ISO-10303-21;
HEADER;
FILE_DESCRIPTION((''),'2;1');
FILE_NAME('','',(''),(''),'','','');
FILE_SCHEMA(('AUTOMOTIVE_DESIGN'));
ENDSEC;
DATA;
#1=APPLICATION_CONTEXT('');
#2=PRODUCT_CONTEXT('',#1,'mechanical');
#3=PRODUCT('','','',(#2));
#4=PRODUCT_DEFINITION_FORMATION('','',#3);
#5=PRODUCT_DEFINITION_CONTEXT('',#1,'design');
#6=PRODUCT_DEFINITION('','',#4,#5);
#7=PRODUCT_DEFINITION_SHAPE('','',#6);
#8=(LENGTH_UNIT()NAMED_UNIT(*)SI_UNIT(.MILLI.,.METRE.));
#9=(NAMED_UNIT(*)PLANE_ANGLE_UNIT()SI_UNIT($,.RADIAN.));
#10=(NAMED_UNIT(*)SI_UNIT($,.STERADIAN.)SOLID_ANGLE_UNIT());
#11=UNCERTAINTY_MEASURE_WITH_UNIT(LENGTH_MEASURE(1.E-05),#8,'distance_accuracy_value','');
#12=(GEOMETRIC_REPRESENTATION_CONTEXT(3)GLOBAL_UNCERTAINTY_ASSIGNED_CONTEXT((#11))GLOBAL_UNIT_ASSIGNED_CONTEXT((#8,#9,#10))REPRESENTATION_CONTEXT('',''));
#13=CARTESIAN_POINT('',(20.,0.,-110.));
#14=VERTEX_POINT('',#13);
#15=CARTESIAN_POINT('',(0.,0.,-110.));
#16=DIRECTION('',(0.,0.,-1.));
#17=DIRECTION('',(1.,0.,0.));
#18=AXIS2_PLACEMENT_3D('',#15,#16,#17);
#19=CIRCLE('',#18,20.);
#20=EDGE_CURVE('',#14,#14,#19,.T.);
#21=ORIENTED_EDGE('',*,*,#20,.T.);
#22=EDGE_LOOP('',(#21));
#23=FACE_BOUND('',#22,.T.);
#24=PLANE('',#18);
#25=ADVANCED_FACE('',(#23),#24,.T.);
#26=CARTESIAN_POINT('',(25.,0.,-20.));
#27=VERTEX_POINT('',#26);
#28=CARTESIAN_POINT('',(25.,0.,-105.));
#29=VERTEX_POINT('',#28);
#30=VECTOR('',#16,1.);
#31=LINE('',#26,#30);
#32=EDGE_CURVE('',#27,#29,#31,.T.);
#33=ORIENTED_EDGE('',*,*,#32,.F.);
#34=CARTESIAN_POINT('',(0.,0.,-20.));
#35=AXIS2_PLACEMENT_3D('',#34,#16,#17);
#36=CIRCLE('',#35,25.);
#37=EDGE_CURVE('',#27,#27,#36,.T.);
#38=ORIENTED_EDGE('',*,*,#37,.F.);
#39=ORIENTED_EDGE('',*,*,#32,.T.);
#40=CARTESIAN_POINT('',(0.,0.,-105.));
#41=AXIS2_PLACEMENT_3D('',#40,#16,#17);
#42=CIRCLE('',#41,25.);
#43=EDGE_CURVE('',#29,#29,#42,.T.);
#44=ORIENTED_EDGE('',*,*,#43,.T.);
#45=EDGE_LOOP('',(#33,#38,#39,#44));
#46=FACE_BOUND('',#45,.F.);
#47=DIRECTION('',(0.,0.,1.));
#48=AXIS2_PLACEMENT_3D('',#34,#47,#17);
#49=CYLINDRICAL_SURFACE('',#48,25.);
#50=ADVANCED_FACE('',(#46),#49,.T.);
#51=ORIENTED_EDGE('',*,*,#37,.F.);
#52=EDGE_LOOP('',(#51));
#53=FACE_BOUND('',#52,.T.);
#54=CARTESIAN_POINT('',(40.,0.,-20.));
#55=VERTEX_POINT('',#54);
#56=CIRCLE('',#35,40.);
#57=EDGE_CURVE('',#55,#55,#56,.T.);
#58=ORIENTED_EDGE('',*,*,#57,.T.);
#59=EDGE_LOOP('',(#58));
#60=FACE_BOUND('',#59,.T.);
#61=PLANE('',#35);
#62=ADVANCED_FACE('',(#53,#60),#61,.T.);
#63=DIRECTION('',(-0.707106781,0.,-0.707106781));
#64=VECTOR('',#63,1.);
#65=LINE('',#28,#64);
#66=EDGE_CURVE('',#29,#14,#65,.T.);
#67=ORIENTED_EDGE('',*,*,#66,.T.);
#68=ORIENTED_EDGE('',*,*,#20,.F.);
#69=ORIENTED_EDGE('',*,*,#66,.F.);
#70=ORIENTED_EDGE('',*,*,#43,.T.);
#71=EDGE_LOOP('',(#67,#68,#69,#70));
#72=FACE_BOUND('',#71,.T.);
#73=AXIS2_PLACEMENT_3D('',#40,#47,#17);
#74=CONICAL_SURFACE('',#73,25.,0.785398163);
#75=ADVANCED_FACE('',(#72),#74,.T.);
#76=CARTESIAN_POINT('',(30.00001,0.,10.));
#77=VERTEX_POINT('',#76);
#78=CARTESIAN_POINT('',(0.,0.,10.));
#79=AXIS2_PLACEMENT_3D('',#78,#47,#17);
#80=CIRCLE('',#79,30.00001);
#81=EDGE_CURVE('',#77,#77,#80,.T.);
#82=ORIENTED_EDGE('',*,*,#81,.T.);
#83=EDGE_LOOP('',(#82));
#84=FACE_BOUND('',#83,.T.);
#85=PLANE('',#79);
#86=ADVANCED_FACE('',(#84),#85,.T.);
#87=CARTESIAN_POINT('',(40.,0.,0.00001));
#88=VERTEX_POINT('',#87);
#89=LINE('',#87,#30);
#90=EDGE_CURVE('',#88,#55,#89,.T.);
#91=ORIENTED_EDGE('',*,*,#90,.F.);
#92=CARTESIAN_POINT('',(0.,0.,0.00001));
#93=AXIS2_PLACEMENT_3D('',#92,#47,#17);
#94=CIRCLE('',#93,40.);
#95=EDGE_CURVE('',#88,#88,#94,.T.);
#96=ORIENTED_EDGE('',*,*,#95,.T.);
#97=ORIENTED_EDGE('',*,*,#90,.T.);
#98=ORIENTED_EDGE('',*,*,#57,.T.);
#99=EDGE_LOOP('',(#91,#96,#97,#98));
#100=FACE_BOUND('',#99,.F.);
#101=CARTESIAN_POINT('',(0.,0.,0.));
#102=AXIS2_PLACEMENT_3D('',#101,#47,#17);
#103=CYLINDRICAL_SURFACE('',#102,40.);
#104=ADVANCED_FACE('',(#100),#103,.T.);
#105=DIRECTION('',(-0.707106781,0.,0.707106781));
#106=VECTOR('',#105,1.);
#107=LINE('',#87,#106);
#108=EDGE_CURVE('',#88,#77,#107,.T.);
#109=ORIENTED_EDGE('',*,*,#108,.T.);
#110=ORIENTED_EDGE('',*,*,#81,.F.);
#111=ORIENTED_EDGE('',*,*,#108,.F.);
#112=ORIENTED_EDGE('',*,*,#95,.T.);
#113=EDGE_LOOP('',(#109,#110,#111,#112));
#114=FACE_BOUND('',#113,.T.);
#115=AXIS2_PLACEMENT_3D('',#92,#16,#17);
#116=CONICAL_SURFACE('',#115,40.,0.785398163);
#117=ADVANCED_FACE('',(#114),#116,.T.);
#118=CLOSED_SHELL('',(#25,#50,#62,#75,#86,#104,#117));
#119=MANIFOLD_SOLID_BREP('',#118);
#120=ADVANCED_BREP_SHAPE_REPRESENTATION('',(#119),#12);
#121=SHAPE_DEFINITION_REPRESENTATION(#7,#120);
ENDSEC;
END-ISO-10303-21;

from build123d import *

# Parameters (mm, degrees)
F0_R     = 40
F1_DEPTH = 10
F3_SIZE  = 9.99999
F2_R     = 40
F4_DEPTH = 20
F5_R     = 25
F6_DEPTH = 90
F7_SIZE  = 5


# Not quite as in the source:
# - a fillet or chamfer is up to 0.001 mm smaller than in the source, because OpenCascade refuses the exact size


with BuildPart() as f1:
    # F0 (on Top) → F1 (new body)
    with BuildSketch(Plane.XY):
        Circle(F0_R)
    extrude(amount=F1_DEPTH)

    # F3 (size 10 in the source; OpenCascade refuses exactly that, so slightly less here)
    f3_edges = [f1.edges().sort_by_distance(p)[0] for p in [
        (-40, 0, 10),
    ]]
    chamfer(f3_edges, length=F3_SIZE)

    # F2 (on face) → F4 (join)
    with BuildSketch(Plane(origin=(0, 0, 0), x_dir=(1, 0, 0), z_dir=(0, 0, -1))):
        Circle(F2_R)
    extrude(amount=F4_DEPTH)

    # F5 (on face) → F6 (join)
    with BuildSketch(Plane(origin=(0, 0, -20), x_dir=(1, 0, 0), z_dir=(0, 0, -1))):
        Circle(F5_R)
    extrude(amount=F6_DEPTH)

    # F7
    f7_edges = [f1.edges().sort_by_distance(p)[0] for p in [
        (-25, 0, -110),
    ]]
    chamfer(f7_edges, length=F7_SIZE)


solid = f1.part
